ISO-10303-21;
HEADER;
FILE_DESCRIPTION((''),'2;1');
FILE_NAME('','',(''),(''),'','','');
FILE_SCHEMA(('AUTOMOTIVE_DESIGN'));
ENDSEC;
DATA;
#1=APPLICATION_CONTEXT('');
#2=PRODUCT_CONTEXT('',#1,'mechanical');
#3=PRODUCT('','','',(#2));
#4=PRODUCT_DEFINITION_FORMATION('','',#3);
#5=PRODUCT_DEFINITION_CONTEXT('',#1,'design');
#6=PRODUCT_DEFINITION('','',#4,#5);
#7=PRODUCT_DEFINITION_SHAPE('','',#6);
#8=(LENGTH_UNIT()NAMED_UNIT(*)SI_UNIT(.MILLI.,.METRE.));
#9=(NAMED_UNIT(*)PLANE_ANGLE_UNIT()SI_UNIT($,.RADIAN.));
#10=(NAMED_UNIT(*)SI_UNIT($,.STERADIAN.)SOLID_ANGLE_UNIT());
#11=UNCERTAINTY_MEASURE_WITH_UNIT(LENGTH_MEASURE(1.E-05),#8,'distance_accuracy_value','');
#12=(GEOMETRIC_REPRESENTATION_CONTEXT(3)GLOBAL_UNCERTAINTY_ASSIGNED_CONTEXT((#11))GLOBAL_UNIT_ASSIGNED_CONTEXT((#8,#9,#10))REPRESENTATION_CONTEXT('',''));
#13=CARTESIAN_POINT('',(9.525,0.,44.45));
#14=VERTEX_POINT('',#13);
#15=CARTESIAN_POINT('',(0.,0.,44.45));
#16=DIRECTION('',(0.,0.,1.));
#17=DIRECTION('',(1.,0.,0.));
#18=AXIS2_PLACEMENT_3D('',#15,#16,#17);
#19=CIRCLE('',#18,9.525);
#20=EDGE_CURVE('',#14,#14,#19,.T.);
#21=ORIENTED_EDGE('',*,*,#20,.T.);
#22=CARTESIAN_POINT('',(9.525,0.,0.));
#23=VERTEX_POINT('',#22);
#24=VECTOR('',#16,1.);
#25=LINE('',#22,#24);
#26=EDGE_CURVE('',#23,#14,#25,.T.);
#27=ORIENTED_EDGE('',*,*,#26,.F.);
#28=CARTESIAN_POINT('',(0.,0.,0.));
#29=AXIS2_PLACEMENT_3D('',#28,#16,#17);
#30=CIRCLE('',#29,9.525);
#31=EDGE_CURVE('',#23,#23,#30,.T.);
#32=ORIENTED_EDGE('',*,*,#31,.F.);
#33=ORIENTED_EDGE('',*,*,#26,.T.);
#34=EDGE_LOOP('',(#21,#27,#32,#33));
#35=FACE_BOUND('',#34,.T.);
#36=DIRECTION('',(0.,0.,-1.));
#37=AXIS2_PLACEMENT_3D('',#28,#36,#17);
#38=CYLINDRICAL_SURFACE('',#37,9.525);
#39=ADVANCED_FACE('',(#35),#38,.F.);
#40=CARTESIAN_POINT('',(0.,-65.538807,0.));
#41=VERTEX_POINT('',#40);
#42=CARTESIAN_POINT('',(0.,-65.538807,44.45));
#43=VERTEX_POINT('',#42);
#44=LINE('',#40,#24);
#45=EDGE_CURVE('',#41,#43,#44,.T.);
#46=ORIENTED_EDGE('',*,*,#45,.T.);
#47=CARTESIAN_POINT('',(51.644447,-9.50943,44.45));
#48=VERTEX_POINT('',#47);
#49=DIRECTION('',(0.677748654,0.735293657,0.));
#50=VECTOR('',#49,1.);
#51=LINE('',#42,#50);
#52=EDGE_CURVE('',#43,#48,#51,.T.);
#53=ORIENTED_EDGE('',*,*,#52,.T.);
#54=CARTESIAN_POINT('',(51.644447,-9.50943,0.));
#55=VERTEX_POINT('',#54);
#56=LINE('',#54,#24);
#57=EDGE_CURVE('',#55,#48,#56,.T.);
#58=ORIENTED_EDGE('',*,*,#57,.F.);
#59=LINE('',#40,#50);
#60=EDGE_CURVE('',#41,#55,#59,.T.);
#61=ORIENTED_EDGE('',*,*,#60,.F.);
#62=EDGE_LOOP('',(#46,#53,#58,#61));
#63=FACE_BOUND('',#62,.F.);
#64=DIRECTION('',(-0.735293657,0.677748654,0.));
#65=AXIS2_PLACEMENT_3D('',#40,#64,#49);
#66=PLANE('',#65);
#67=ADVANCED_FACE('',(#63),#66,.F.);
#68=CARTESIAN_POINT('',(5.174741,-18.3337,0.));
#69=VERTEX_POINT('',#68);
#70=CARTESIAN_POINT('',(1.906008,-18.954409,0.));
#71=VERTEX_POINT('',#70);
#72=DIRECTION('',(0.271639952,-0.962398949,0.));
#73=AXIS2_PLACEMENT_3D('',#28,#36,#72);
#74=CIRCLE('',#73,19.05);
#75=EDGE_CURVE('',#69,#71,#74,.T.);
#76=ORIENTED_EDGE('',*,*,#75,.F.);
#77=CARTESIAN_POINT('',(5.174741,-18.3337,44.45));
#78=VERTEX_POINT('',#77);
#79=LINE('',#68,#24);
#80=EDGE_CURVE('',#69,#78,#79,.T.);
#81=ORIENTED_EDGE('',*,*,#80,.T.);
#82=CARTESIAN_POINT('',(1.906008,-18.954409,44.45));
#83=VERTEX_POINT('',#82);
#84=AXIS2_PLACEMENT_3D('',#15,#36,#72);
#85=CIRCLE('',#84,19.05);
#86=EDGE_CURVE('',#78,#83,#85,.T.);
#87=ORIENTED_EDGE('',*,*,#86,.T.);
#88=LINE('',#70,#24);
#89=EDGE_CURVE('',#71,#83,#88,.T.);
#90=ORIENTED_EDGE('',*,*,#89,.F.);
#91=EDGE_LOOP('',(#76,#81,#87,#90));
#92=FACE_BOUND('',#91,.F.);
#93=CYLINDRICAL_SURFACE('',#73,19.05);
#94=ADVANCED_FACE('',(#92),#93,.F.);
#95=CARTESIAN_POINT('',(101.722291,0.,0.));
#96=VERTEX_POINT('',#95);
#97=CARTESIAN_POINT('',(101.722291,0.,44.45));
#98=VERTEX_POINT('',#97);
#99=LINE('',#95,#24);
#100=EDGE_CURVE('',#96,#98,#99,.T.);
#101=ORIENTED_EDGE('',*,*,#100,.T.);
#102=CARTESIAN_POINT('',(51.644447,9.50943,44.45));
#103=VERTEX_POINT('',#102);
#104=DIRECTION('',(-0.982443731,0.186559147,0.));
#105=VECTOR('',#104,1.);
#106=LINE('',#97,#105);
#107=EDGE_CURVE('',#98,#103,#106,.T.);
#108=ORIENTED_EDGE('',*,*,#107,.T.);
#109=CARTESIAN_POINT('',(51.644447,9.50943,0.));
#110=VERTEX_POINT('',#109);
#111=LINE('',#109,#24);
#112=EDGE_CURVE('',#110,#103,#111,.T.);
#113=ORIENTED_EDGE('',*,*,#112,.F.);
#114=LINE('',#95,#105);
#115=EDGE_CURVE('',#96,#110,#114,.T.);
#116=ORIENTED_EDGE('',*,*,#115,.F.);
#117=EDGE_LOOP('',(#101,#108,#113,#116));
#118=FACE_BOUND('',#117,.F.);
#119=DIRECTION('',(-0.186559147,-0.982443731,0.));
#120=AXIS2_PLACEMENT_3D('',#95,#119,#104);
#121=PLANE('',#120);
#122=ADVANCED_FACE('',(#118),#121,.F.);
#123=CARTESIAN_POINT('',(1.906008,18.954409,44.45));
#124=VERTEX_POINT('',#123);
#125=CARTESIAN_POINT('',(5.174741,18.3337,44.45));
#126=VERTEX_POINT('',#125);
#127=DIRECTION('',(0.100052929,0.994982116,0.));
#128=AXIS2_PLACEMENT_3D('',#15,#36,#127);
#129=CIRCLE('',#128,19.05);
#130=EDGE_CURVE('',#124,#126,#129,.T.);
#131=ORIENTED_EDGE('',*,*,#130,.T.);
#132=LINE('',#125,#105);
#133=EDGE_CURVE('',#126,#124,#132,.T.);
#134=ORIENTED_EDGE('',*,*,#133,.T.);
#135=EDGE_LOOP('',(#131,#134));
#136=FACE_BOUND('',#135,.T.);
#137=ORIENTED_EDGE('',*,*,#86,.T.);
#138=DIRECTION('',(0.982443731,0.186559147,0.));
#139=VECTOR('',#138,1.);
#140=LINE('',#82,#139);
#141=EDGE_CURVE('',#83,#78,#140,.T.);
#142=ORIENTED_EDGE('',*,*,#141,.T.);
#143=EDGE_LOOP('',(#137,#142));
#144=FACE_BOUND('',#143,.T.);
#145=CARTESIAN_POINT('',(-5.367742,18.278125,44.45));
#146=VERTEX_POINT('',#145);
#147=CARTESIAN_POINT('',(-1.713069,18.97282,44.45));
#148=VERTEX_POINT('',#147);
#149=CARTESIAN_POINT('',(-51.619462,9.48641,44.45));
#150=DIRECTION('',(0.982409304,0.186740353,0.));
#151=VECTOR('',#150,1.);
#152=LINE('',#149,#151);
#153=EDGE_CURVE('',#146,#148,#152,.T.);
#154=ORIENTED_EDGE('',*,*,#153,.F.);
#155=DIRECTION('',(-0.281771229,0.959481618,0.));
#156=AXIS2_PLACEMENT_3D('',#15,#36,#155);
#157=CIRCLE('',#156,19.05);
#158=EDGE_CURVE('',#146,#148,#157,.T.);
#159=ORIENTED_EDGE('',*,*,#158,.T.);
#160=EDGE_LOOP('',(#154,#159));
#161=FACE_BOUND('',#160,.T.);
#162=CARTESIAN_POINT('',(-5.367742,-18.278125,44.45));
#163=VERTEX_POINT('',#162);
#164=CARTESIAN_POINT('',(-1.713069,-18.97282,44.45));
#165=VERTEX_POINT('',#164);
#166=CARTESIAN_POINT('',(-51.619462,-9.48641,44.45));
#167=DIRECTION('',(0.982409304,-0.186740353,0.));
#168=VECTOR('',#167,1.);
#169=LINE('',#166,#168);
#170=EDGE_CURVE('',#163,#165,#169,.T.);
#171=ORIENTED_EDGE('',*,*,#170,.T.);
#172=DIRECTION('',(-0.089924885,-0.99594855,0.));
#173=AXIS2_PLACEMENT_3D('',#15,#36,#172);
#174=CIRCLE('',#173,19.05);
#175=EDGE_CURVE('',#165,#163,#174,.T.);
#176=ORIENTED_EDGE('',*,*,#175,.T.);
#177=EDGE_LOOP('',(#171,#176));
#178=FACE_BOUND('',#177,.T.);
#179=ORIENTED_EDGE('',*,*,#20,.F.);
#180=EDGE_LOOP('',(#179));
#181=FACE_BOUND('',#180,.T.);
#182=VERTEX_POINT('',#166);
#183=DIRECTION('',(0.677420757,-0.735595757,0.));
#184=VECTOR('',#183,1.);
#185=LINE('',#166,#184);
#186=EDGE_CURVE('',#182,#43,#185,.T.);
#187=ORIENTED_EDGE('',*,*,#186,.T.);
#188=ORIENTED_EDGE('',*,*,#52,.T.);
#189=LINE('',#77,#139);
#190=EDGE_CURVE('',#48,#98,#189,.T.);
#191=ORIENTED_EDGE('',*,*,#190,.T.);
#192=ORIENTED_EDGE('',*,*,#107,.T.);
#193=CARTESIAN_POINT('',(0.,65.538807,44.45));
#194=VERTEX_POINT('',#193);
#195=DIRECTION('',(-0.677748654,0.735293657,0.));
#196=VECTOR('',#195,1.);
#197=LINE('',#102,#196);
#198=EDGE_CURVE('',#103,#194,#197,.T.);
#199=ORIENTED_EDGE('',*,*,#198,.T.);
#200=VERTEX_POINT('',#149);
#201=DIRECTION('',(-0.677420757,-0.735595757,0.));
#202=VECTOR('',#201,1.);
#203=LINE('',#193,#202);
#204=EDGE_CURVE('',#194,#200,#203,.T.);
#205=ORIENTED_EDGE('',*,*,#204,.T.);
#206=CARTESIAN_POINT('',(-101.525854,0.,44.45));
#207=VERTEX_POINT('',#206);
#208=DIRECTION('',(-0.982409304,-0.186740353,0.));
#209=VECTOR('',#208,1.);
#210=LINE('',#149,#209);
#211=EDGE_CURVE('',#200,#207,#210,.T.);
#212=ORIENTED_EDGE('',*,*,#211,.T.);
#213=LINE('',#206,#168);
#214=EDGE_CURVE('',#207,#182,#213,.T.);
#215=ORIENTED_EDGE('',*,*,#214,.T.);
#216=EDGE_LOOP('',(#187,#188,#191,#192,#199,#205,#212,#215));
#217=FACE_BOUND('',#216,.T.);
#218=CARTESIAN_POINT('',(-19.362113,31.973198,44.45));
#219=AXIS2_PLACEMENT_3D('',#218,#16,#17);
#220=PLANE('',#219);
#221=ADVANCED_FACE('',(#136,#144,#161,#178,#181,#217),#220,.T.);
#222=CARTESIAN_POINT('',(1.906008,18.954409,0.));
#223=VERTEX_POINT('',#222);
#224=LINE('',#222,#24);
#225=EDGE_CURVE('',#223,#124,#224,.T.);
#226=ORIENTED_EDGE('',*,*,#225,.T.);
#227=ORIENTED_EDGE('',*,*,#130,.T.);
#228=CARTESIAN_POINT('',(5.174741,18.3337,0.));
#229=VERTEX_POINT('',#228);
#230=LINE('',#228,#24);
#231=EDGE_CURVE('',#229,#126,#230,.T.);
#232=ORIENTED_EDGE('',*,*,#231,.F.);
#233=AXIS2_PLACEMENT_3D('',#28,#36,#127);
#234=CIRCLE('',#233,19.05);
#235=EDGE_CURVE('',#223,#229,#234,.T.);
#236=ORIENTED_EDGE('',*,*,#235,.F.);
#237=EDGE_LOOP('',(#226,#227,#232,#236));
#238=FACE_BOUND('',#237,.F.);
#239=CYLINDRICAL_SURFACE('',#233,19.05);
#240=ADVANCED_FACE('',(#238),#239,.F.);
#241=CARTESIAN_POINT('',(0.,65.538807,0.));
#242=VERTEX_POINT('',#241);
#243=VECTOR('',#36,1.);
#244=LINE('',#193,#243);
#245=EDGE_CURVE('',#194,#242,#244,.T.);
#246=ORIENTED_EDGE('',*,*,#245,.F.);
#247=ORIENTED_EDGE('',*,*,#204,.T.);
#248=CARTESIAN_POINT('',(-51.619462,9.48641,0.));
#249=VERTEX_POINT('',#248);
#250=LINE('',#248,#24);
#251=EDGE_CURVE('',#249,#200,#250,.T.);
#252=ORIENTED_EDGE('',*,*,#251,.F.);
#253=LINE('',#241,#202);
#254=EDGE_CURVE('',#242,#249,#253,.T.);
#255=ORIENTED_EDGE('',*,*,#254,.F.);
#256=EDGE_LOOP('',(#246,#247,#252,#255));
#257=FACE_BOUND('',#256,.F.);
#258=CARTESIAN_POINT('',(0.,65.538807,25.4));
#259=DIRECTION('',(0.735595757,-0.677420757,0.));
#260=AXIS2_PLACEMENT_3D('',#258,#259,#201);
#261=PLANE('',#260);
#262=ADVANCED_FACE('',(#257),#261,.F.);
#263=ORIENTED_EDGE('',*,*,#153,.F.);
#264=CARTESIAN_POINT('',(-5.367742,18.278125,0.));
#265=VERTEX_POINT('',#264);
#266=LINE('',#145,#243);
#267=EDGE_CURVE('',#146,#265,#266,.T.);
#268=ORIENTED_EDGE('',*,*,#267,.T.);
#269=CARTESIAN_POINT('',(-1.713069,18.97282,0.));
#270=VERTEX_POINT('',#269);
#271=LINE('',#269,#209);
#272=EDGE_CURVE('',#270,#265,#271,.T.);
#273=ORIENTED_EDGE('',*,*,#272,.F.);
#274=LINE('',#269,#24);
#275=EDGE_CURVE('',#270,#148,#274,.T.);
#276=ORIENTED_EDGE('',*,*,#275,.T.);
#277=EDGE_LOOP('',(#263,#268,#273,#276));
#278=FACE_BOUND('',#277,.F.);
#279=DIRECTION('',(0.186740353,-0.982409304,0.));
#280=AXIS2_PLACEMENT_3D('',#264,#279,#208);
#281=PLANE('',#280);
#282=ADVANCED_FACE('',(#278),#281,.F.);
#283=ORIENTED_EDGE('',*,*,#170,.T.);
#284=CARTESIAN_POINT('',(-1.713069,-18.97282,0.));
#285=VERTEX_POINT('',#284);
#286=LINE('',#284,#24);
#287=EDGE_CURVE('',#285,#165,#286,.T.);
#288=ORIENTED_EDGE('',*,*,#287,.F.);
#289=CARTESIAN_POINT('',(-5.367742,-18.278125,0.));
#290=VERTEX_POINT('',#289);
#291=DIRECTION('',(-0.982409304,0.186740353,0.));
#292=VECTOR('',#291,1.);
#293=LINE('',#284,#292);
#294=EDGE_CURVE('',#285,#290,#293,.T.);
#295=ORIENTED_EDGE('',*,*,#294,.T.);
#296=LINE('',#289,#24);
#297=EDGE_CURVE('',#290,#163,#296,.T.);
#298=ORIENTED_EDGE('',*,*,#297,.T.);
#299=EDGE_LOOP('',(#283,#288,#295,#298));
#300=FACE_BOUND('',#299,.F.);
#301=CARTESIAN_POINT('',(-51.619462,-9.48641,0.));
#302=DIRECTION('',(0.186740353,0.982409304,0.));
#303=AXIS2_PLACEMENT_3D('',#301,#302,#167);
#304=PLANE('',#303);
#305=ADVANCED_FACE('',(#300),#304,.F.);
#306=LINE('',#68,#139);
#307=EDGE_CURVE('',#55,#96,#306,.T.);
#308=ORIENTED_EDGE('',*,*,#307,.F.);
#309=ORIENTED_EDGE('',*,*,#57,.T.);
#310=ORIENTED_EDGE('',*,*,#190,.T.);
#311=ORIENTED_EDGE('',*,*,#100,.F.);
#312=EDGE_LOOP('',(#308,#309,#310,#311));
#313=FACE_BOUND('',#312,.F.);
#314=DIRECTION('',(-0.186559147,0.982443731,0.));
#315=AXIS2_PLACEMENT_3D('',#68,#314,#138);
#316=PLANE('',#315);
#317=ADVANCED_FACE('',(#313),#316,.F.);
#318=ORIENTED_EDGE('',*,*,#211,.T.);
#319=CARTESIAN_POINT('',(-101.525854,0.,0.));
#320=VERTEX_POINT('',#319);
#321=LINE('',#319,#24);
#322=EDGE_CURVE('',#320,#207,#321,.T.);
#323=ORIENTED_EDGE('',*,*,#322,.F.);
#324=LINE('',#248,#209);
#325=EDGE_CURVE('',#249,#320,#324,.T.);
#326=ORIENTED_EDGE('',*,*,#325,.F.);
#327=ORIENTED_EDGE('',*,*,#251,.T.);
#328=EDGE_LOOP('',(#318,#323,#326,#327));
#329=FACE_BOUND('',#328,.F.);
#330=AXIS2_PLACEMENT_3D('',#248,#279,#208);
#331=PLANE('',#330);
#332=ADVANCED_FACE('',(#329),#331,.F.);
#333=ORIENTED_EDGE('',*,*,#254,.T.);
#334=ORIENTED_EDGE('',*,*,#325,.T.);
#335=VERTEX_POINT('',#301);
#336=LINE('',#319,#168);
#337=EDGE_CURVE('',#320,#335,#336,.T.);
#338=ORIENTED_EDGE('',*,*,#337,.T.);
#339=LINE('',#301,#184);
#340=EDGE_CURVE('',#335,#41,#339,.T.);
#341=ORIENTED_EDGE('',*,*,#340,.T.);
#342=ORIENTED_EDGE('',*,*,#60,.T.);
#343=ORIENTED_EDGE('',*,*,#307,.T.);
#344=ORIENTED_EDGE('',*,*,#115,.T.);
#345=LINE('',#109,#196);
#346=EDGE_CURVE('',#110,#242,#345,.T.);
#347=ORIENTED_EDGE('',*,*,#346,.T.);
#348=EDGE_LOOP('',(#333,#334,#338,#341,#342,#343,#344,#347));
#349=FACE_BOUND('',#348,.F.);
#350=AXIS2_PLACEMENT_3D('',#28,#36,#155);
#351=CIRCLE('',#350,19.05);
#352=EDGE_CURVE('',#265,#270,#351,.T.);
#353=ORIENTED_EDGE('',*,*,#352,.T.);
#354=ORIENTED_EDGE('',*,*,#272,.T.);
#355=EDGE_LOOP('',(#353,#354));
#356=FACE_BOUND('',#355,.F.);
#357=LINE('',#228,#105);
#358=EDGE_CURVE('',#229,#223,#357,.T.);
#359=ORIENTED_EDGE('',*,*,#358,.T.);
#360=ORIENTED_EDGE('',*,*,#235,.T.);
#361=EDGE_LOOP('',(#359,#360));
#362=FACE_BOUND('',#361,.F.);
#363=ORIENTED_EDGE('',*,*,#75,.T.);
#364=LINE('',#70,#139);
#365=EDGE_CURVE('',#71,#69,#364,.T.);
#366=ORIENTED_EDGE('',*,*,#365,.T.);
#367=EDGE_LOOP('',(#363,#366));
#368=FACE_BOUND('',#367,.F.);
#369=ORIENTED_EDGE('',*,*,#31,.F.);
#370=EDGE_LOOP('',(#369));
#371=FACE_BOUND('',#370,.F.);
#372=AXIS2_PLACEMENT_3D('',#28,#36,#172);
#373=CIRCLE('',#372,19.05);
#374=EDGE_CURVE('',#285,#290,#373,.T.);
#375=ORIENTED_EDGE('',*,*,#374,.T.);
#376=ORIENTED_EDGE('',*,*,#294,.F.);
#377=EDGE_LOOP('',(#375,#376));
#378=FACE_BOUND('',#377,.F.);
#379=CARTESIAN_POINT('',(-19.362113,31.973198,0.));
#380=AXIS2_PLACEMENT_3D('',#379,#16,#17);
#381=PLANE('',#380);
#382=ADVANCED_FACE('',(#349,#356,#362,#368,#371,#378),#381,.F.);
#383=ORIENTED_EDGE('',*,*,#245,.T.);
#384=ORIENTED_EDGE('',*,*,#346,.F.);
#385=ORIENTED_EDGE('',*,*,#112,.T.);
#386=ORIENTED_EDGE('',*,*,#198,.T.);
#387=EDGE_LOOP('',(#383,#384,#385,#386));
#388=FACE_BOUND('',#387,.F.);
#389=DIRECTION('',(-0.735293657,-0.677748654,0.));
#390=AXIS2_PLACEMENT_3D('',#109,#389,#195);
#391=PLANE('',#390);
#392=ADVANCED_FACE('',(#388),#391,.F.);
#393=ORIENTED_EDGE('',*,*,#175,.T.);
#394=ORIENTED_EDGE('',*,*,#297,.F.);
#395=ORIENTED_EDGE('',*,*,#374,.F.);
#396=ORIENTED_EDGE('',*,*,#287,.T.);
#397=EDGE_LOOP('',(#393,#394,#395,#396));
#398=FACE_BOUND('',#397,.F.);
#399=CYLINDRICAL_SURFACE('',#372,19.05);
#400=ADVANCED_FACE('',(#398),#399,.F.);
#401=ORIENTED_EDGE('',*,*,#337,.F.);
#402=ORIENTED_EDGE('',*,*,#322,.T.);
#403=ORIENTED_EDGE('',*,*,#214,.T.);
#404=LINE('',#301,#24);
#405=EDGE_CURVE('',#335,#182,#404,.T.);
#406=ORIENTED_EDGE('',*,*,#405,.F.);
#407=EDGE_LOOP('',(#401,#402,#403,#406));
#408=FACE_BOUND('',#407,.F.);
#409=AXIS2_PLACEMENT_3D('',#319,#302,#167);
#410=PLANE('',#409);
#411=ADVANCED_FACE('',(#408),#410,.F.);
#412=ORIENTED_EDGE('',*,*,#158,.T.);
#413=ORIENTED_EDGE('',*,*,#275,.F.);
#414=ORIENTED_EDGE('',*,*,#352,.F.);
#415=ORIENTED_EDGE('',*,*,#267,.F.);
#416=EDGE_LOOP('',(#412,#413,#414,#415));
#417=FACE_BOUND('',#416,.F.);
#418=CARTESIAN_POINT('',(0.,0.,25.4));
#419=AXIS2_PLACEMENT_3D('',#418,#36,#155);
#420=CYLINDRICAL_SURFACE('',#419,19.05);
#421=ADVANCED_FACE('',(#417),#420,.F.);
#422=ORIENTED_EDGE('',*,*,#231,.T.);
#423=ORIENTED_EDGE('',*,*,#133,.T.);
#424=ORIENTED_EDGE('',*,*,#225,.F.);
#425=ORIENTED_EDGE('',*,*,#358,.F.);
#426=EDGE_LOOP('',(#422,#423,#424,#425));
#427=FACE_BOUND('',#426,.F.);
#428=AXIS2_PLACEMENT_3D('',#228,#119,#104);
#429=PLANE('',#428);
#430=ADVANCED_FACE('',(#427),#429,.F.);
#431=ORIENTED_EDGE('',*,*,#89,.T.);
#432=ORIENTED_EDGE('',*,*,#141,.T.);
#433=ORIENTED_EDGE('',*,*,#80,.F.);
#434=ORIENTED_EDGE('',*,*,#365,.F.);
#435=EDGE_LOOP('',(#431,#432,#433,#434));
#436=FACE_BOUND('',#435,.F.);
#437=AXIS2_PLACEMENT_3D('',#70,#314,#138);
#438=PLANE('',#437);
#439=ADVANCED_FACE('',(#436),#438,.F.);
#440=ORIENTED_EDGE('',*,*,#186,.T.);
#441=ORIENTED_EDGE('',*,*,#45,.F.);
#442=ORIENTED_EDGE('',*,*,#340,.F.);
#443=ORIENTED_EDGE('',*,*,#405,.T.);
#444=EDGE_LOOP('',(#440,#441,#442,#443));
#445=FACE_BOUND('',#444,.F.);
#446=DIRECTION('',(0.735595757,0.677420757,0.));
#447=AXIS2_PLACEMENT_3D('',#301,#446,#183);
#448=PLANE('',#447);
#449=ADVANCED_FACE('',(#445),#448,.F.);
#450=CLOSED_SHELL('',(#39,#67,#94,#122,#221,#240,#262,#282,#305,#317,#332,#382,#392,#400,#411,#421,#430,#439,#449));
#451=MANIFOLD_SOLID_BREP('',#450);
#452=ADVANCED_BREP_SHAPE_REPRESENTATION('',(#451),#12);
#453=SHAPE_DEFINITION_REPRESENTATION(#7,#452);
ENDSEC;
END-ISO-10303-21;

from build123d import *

# Parameters (mm, degrees)
F0_R     = 9.525
F1_DEPTH = 44.45
F2_DEPTH = 44.45
F3_DEPTH = 44.45
F4_DEPTH = 44.45
F5_DEPTH = 44.45
F6_DEPTH = 44.45
F7_DEPTH = 44.45
F8_DEPTH = 25.4
F9_DEPTH = 19.05


with BuildPart() as f1:
    # F0 (on Top) → F1 (new body)
    with BuildSketch(Plane.XY):
        with BuildLine():
            Line((5.1747410867, 18.3336999726), (1.9060083062, 18.9544093112))
            ThreePointArc((1.9060083062, 18.9544093112), (0.0969078237, 19.0497535122), (-1.7130690518, 18.9728198859))
            Line((-1.7130690518, 18.9728198859), (-5.3677419125, 18.2781248152))
            ThreePointArc((-5.3677419125, 18.2781248152), (-19.05, 0), (-5.3677419125, -18.2781248152))
            Line((-5.3677419125, -18.2781248152), (-1.7130690518, -18.9728198859))
            ThreePointArc((-1.7130690518, -18.9728198859), (0.0969078237, -19.0497535122), (1.9060083062, -18.9544093112))
            Line((1.9060083062, -18.9544093112), (5.1747410867, -18.3336999726))
            ThreePointArc((5.1747410867, -18.3336999726), (15.1901500602, -11.4961663675), (19.05, 0))
            ThreePointArc((19.05, 0), (15.1901500602, 11.4961663675), (5.1747410867, 18.3336999726))
        make_face()
        Circle(F0_R, mode=Mode.SUBTRACT)
        with BuildLine():
            Line((51.6444474156, 9.5094299521), (5.1747410867, 18.3336999726))
            ThreePointArc((5.1747410867, 18.3336999726), (15.1901500602, 11.4961663675), (19.05, 0))
            ThreePointArc((19.05, 0), (15.1901500602, -11.4961663675), (5.1747410867, -18.3336999726))
            Line((5.1747410867, -18.3336999726), (51.6444474156, -9.5094299521))
            Line((51.6444474156, -9.5094299521), (101.722291385, 0))
            Line((101.722291385, 0), (51.6444474156, 9.5094299521))
        make_face()
    extrude(amount=F1_DEPTH)

    # F0 (on Top) → F2 (join)
    with BuildSketch(Plane.XY):
        with BuildLine():
            Line((0, 65.538806632), (1.9060083062, 18.9544093112))
            ThreePointArc((1.9060083062, 18.9544093112), (3.5539517459, 18.7155530773), (5.1747410867, 18.3336999726))
            Line((5.1747410867, 18.3336999726), (51.6444474156, 9.5094299521))
            Line((51.6444474156, 9.5094299521), (0, 65.538806632))
        make_face()
    extrude(amount=F2_DEPTH)

    # F0 (on Top) → F3 (join)
    with BuildSketch(Plane.XY):
        with BuildLine():
            ThreePointArc((-5.3677419125, -18.2781248152), (-19.05, 0), (-5.3677419125, 18.2781248152))
            Line((-5.3677419125, 18.2781248152), (-51.6194616924, 9.486409943))
            Line((-51.6194616924, 9.486409943), (-101.5258543329, 0))
            Line((-101.5258543329, 0), (-51.6194616924, -9.486409943))
            Line((-51.6194616924, -9.486409943), (-5.3677419125, -18.2781248152))
        make_face()
    extrude(amount=F3_DEPTH)

    # F0 (on Top) → F4 (join)
    with BuildSketch(Plane.XY):
        with BuildLine():
            ThreePointArc((1.9060083062, -18.9544093112), (0.0969078237, -19.0497535122), (-1.7130690518, -18.9728198859))
            Line((-1.7130690518, -18.9728198859), (0, -65.538806632))
            Line((0, -65.538806632), (1.9060083062, -18.9544093112))
        make_face()
    extrude(amount=F4_DEPTH)

    # F0 (on Top) → F5 (join)
    with BuildSketch(Plane.XY):
        with BuildLine():
            ThreePointArc((-1.7130690518, 18.9728198859), (0.0969078237, 19.0497535122), (1.9060083062, 18.9544093112))
            Line((1.9060083062, 18.9544093112), (0, 65.538806632))
            Line((0, 65.538806632), (-1.7130690518, 18.9728198859))
        make_face()
    extrude(amount=F5_DEPTH)

    # F0 (on Top) → F6 (join)
    with BuildSketch(Plane.XY):
        with BuildLine():
            ThreePointArc((-1.7130690518, -18.9728198859), (-3.5574037286, -18.7148972402), (-5.3677419125, -18.2781248152))
            Line((-5.3677419125, -18.2781248152), (-51.6194616924, -9.486409943))
            Line((-51.6194616924, -9.486409943), (0, -65.538806632))
            Line((0, -65.538806632), (-1.7130690518, -18.9728198859))
        make_face()
        with BuildLine():
            Line((51.6444474156, -9.5094299521), (5.1747410867, -18.3336999726))
            ThreePointArc((5.1747410867, -18.3336999726), (3.5539517459, -18.7155530773), (1.9060083062, -18.9544093112))
            Line((1.9060083062, -18.9544093112), (0, -65.538806632))
            Line((0, -65.538806632), (51.6444474156, -9.5094299521))
        make_face()
    extrude(amount=F6_DEPTH)

    # F0 (on Top) → F7 (join)
    with BuildSketch(Plane.XY):
        with BuildLine():
            Line((0, 65.538806632), (1.9060083062, 18.9544093112))
            ThreePointArc((1.9060083062, 18.9544093112), (3.5539517459, 18.7155530773), (5.1747410867, 18.3336999726))
            Line((5.1747410867, 18.3336999726), (51.6444474156, 9.5094299521))
            Line((51.6444474156, 9.5094299521), (0, 65.538806632))
        make_face()
    extrude(amount=F7_DEPTH)

    # F0 (on Top) → F8 (join)
    with BuildSketch(Plane.XY):
        with BuildLine():
            ThreePointArc((-5.3677419125, 18.2781248152), (-3.5574037286, 18.7148972402), (-1.7130690518, 18.9728198859))
            Line((-1.7130690518, 18.9728198859), (0, 65.538806632))
            Line((0, 65.538806632), (-51.6194616924, 9.486409943))
            Line((-51.6194616924, 9.486409943), (-5.3677419125, 18.2781248152))
        make_face()
    extrude(amount=F8_DEPTH)

    # F9 (add): a face of the model
    f9_faces = [f1.faces().sort_by_distance(p)[0] for p in [
        (-17.7802963079, 31.335159678, 25.4),
    ]]
    extrude(f9_faces, amount=F9_DEPTH)


solid = f1.part
